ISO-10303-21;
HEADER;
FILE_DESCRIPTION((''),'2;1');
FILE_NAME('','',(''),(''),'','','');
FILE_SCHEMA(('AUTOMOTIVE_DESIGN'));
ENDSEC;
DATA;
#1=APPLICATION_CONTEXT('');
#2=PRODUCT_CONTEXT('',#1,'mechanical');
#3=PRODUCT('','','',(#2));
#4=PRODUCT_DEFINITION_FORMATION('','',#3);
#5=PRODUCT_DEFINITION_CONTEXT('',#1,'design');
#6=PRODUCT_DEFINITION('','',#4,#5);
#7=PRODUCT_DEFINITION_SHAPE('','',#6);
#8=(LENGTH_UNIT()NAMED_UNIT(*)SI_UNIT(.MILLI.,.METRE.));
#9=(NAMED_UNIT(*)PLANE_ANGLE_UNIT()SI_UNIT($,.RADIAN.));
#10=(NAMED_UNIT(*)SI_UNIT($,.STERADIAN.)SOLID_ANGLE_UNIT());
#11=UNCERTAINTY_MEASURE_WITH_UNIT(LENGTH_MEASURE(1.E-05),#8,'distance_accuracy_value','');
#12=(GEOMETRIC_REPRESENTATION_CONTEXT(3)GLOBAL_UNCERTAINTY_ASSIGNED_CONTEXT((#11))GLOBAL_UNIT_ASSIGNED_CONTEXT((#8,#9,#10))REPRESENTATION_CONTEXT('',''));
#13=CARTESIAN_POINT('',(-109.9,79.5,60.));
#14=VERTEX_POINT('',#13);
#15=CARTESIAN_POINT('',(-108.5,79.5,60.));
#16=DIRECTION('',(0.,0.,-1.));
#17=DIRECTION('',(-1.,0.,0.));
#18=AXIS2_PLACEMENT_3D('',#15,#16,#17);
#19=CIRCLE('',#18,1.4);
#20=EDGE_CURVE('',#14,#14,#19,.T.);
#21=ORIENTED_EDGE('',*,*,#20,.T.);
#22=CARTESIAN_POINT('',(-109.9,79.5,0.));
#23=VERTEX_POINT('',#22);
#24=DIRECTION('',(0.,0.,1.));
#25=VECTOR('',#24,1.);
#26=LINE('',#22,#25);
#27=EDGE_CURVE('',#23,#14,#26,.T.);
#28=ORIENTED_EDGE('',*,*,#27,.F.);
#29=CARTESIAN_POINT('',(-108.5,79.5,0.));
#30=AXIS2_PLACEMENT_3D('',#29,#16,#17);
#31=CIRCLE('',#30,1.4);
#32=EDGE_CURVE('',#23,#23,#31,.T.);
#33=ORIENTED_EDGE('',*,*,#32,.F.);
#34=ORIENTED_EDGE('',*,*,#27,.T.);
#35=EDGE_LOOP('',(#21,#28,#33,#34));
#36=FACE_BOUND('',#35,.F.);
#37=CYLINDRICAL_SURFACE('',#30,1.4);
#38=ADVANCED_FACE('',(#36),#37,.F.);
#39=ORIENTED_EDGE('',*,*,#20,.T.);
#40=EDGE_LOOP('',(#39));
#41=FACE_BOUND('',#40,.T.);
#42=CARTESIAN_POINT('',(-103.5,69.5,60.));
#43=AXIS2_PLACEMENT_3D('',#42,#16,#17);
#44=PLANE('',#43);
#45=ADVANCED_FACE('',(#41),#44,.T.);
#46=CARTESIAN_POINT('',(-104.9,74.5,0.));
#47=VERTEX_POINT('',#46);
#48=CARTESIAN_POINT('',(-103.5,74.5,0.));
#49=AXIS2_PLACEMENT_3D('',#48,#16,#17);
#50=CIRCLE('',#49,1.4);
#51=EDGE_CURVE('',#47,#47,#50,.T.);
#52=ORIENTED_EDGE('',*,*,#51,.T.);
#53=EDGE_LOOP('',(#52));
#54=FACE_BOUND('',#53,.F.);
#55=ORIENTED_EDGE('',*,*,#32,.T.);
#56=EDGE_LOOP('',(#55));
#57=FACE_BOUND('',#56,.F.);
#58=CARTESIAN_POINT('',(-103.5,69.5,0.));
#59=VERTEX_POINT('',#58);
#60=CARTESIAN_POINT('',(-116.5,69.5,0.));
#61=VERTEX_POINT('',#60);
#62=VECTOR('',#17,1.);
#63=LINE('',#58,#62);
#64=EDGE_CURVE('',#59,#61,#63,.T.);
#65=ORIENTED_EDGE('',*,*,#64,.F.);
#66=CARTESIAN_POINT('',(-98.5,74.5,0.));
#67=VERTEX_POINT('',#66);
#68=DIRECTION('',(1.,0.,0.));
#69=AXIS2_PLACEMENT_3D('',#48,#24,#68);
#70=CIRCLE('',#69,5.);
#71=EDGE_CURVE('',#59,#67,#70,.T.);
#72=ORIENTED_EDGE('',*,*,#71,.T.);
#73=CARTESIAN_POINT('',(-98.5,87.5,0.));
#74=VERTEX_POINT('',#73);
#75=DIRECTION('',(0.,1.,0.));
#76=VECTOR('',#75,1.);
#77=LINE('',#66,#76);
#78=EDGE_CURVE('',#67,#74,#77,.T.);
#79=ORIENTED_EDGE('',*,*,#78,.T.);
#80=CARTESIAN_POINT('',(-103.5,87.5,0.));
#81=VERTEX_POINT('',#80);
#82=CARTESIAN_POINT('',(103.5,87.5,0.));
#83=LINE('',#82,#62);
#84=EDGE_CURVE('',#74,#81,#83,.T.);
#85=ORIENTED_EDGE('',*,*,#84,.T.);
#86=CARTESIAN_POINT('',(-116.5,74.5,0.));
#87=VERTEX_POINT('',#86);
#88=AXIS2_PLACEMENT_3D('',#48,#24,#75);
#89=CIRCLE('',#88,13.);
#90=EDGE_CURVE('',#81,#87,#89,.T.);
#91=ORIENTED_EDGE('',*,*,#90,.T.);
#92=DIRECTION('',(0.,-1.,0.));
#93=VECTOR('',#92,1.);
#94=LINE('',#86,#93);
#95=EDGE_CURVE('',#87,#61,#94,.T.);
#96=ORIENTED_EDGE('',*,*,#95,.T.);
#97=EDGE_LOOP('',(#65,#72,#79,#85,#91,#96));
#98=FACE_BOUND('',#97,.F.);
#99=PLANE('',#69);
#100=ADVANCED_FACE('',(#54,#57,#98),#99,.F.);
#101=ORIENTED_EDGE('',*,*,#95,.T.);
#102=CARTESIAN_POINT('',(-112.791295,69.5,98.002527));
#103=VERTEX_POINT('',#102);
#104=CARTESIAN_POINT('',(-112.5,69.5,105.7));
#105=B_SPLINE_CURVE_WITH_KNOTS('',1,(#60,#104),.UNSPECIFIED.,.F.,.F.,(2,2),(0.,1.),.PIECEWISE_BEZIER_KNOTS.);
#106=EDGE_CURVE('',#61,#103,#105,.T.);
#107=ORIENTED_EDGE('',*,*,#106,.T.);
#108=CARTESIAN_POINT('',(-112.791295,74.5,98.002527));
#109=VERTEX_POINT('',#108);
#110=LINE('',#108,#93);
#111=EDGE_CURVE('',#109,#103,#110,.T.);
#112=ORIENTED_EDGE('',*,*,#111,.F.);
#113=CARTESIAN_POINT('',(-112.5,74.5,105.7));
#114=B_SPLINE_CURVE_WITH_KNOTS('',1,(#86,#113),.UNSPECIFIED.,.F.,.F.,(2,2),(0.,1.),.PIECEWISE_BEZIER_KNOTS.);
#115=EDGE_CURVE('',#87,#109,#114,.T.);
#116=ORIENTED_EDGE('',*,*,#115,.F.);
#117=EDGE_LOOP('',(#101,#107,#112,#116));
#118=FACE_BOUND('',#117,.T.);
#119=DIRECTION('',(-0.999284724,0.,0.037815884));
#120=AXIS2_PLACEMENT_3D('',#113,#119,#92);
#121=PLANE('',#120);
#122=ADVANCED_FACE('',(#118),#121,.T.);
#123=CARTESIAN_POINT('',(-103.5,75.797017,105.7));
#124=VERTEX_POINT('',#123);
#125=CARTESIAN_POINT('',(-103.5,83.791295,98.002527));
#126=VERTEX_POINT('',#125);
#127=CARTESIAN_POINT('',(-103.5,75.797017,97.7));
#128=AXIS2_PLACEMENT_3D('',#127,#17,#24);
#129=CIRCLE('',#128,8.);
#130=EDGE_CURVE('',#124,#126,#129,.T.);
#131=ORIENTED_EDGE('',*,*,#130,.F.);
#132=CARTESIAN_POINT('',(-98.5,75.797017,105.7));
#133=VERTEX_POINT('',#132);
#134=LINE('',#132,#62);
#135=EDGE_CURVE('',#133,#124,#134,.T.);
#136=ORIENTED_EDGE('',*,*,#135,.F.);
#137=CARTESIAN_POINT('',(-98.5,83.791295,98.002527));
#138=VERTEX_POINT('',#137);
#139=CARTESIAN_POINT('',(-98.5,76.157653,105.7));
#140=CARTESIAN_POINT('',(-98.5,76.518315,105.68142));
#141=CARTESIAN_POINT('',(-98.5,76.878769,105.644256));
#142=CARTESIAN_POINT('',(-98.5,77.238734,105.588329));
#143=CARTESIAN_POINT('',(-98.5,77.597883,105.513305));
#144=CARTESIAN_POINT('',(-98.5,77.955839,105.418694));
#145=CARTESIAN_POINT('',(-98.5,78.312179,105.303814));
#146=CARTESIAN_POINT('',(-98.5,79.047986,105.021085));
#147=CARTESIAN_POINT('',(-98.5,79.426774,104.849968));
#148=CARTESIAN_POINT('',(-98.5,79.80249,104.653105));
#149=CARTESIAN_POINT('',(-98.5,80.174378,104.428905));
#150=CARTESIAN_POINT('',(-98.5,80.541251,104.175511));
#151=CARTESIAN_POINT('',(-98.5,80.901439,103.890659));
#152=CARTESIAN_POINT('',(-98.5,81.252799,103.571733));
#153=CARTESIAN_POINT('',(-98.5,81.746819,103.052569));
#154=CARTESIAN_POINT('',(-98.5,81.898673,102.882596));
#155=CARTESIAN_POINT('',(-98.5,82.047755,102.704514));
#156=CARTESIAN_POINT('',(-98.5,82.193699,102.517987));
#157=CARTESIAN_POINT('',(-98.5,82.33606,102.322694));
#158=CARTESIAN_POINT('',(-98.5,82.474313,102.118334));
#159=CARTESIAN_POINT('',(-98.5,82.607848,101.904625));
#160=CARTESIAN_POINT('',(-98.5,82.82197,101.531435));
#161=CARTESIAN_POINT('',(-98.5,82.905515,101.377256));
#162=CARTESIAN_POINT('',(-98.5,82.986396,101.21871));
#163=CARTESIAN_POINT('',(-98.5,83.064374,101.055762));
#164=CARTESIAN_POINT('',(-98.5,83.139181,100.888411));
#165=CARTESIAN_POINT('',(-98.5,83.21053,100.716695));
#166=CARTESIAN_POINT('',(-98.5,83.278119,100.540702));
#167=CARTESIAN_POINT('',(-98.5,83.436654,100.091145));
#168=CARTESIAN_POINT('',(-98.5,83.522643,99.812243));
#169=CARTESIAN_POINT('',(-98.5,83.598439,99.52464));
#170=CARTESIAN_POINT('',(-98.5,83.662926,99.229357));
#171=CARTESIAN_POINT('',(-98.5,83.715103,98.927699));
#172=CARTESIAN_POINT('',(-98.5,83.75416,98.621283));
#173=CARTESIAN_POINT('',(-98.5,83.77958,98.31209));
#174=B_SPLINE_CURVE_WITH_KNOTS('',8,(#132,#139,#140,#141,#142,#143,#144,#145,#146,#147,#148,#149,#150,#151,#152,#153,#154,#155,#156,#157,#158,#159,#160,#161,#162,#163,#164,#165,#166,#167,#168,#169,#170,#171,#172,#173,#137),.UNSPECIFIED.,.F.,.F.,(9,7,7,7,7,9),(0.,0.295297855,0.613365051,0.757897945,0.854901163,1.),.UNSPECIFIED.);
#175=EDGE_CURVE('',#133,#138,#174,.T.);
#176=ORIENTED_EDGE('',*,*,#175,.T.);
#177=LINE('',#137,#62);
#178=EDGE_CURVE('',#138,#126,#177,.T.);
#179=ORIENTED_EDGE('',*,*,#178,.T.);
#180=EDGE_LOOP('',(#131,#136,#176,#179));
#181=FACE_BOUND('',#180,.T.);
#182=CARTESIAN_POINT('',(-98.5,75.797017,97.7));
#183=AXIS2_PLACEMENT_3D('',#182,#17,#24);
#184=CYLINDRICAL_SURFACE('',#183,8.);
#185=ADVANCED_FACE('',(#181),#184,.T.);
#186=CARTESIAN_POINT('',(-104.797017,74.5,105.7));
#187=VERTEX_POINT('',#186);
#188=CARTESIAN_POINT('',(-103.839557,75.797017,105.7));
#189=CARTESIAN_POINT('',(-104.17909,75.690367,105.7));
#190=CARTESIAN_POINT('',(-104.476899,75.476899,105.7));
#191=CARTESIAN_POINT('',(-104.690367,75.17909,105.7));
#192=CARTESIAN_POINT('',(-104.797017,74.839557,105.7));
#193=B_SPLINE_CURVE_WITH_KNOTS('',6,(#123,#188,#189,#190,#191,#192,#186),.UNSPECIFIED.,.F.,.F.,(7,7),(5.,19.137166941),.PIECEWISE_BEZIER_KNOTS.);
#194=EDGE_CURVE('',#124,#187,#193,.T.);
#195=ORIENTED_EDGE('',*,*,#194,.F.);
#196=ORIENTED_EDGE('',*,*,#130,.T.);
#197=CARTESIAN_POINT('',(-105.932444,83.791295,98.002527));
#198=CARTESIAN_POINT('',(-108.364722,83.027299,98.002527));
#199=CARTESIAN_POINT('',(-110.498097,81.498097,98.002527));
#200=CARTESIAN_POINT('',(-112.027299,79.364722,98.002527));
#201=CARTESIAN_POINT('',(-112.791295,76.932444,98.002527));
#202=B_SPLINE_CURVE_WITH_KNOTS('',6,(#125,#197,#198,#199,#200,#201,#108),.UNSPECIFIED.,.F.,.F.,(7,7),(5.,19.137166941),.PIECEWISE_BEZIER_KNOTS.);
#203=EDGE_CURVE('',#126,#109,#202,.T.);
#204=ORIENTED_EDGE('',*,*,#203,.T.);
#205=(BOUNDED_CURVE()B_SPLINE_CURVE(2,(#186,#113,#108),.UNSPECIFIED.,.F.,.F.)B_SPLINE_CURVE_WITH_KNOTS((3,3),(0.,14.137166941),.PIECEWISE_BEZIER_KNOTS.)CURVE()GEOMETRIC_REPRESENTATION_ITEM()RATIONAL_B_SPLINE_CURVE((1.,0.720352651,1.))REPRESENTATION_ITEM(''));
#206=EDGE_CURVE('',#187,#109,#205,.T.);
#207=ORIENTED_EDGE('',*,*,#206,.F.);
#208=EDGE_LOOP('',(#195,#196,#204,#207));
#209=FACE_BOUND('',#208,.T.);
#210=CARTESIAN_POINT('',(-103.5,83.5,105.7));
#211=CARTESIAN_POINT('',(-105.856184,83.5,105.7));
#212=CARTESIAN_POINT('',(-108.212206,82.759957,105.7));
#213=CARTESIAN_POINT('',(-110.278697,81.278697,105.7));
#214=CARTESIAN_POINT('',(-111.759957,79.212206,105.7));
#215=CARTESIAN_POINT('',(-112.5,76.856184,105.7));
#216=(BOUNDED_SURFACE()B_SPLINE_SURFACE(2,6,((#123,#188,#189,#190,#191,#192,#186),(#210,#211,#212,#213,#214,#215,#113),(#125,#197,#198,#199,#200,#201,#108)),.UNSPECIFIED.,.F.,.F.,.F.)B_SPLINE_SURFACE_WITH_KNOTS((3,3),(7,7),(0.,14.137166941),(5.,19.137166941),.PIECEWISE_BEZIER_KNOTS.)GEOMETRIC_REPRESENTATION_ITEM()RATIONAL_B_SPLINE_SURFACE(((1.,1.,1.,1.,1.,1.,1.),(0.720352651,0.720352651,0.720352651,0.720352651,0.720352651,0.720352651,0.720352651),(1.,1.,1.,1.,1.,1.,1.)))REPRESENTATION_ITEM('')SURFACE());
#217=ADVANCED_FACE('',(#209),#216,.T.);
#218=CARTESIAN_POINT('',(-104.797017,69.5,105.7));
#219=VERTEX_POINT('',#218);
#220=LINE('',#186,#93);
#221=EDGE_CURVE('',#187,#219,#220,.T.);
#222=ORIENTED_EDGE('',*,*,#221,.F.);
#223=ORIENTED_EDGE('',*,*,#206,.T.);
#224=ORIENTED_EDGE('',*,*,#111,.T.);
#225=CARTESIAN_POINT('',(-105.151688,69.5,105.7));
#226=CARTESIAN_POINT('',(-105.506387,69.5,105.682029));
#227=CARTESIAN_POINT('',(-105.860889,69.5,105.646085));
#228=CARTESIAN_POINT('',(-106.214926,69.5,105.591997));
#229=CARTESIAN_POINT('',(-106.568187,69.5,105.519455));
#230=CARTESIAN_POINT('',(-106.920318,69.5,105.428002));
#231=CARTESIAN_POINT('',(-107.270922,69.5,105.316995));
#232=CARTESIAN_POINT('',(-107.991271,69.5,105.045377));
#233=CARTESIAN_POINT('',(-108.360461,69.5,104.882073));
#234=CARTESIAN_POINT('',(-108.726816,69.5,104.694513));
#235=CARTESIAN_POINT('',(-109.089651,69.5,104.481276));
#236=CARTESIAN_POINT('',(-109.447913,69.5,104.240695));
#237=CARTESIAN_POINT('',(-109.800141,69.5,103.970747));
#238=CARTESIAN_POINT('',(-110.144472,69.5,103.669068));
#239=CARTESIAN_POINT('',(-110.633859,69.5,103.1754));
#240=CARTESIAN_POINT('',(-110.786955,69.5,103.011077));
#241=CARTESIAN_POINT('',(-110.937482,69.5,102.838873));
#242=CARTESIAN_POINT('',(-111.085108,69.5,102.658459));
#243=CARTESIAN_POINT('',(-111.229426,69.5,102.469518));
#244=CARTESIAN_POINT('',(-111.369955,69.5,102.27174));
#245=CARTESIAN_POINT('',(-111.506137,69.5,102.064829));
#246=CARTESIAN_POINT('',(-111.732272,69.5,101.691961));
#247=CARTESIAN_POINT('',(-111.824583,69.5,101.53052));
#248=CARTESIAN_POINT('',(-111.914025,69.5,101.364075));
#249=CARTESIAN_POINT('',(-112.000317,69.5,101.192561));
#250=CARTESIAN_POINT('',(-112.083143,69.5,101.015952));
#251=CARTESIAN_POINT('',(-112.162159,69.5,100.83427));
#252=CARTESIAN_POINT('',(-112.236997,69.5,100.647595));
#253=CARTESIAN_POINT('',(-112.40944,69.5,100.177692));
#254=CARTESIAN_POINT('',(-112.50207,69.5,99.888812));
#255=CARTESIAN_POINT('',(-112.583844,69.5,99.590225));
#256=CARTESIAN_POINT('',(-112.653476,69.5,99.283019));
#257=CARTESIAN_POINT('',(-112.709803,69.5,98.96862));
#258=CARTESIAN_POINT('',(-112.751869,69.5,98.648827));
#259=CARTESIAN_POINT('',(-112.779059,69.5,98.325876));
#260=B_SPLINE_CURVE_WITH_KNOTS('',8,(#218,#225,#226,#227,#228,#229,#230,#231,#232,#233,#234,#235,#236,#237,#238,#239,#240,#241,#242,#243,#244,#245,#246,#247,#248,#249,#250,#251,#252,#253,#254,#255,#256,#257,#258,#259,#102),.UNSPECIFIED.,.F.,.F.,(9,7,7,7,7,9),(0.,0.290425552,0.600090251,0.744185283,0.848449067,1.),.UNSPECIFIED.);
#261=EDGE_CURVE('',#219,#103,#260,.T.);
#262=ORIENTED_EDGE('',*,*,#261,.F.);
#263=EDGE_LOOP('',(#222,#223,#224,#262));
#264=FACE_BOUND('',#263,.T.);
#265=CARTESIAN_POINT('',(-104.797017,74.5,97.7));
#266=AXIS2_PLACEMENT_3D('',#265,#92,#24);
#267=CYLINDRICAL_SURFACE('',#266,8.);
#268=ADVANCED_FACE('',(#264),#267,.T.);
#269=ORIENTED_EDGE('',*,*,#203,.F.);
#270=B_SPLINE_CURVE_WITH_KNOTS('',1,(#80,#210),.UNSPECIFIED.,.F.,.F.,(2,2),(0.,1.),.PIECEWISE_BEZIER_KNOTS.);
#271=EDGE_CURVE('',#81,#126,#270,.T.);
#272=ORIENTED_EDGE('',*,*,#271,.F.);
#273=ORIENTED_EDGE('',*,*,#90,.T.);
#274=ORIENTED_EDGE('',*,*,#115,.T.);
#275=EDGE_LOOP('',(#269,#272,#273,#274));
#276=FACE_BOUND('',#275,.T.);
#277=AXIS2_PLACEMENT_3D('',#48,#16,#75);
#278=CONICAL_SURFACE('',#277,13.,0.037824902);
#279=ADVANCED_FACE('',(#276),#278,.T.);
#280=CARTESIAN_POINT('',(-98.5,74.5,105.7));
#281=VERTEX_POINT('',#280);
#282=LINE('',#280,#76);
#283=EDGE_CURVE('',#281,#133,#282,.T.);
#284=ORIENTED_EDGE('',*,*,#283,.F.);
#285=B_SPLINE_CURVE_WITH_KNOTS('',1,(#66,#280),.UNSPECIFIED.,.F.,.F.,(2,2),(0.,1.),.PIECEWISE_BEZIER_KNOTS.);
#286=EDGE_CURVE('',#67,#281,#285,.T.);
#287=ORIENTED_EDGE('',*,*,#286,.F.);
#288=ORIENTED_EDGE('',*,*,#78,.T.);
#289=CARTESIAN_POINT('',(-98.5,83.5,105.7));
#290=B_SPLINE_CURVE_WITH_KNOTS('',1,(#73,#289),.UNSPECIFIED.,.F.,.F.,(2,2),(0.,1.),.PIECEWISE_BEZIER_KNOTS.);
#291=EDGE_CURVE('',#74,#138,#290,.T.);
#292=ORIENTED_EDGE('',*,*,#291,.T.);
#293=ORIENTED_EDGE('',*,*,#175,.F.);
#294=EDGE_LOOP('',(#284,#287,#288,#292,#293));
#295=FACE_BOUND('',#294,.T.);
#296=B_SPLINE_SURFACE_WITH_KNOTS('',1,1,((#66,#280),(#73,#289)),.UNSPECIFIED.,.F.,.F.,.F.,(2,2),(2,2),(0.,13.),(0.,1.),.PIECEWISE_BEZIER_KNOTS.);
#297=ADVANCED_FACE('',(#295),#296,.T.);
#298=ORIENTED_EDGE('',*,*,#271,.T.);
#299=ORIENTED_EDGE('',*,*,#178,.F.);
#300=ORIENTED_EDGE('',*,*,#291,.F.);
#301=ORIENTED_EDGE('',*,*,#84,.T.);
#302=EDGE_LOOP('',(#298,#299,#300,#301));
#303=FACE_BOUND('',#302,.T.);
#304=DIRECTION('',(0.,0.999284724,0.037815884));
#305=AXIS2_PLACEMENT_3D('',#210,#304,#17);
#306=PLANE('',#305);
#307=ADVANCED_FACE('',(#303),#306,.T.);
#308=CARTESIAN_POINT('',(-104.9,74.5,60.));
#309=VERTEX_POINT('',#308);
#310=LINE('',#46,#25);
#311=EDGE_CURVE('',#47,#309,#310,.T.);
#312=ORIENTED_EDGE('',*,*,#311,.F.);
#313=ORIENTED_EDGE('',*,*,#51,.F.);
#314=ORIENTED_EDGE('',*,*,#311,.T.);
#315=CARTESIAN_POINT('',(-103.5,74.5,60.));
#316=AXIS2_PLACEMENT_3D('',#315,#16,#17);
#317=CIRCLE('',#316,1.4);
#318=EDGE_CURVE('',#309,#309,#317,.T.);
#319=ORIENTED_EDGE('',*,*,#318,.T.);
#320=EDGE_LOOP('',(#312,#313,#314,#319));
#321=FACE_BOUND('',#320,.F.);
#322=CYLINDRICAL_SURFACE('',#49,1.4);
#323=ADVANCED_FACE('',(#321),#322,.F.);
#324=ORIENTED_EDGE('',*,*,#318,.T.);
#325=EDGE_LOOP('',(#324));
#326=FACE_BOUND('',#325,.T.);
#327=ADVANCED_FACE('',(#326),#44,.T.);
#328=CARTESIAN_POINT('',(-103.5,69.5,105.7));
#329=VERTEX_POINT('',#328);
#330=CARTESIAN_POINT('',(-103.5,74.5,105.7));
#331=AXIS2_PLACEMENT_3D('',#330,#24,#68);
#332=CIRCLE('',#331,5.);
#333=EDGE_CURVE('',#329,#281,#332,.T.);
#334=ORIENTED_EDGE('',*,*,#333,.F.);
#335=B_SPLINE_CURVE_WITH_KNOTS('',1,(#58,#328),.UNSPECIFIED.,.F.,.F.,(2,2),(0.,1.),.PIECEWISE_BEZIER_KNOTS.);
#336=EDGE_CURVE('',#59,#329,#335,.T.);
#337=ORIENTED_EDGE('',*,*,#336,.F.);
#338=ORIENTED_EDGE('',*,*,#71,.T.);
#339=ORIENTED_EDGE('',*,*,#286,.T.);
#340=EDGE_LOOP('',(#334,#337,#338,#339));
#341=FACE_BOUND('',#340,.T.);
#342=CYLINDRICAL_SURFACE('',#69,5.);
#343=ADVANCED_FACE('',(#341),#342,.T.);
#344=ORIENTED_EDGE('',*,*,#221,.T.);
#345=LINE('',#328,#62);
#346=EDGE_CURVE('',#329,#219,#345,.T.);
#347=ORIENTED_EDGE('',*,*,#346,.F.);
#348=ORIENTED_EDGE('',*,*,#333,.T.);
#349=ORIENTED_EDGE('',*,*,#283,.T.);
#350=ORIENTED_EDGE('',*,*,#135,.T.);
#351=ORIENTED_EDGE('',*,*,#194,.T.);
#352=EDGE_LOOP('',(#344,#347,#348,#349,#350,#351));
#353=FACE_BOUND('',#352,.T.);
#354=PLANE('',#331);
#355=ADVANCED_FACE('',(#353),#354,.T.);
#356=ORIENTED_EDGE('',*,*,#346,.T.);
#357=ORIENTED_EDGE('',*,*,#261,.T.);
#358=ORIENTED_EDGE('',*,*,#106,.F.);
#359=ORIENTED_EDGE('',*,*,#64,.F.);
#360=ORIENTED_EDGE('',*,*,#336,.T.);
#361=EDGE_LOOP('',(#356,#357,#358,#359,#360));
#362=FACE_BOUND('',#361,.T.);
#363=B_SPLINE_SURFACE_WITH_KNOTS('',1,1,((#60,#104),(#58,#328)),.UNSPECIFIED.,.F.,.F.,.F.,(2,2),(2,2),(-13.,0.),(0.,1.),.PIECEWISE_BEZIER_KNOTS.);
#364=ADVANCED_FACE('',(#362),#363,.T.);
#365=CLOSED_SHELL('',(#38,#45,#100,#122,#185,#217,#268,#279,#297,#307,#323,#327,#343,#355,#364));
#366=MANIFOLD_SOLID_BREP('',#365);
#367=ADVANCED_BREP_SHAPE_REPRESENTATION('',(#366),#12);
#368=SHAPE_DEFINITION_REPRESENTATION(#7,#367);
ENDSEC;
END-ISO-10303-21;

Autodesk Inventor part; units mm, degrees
ref_plane "YZ Plane" through (0, 0, 0) normal (1, 0, 0) x (0, 1, 0)
ref_plane "XZ Plane" through (0, 0, 0) normal (0, 1, 0) x (-1, 0, 0)
ref_plane "XY Plane" through (0, 0, 0) normal (0, 0, 1) x (1, 0, 0)
ref_plane "Arbeitsebene1" through (0, 0, 0) normal (0, 0, 1) x (1, 0, 0)
sketch "Skizze1" plane through (0, 0, 0) normal (0, 0, 1) x (1, 0, 0)
  line L0 (76.5043, -50) -> (76.5043, 50) projected
  arc A0 (96.5043, 50) -> (76.5043, 50) centre (86.5043, 50) ccw projected
  line L1 (96.5043, 50) -> (96.5043, -50) projected
  arc A1 (76.5043, -50) -> (96.5043, -50) centre (86.5043, -50) ccw projected
  line L2 (-95.8131, -50) -> (-95.8131, 50) projected
  arc A2 (-75.8131, 50) -> (-95.8131, 50) centre (-85.8131, 50) ccw projected
  line L3 (-75.8131, 50) -> (-75.8131, -50) projected
  arc A3 (-95.8131, -50) -> (-75.8131, -50) centre (-85.8131, -50) ccw projected
  line L4 (-118.5, -74.5) -> (-118.5, 74.5) projected
  arc A4 (-118.5, -74.5) -> (-103.5, -89.5) centre (-103.5, -74.5) ccw projected
  line L5 (56.1, -89.5) -> (-103.5, -89.5) projected
  line L6 (56.1, -83) -> (56.1, -89.5) projected
  arc A5 (71.1, -68) -> (56.1, -83) centre (71.1, -83) ccw projected
  line L7 (80.5, -68) -> (71.1, -68) projected
  arc A6 (95.5, -83) -> (80.5, -68) centre (80.5, -83) ccw projected
  line L8 (95.5, -89.5) -> (95.5, -83) projected
  line L9 (103.5, -89.5) -> (95.5, -89.5) projected
  arc A7 (103.5, -89.5) -> (118.5, -74.5) centre (103.5, -74.5) ccw projected
  line L10 (118.5, 74.5) -> (118.5, -74.5) projected
  arc A8 (118.5, 74.5) -> (103.5, 89.5) centre (103.5, 74.5) ccw projected
  line L11 (-103.5, 89.5) -> (103.5, 89.5) projected
  arc A9 (-103.5, 89.5) -> (-118.5, 74.5) centre (-103.5, 74.5) ccw projected
  circle A10 centre (-58.5, 18.7) radius 1.4 projected
  circle A11 centre (-58.5, 36.552) radius 1.4 projected
  circle A12 centre (57.5, 20.252) radius 1.4 projected
  circle A13 centre (57.5, 35) radius 1.4 projected
  circle A14 centre (-58.5, 8.7) radius 1.4 projected
  circle A15 centre (-58.5, -9.152) radius 1.4 projected
  circle A16 centre (57.5, 7.148) radius 1.4 projected
  circle A17 centre (57.5, -7.6) radius 1.4 projected
  circle A18 centre (103.5, 74.5) radius 1.4 projected
  circle A19 centre (103.5, -74.5) radius 1.4 projected
  circle A20 centre (-103.5, -74.5) radius 1.4 projected
  circle A21 centre (-103.5, 74.5) radius 1.4 projected
  line L12 (20.9567, 0.5738) -> (-20.9567, 0.5738) projected
  line L13 (-20.9567, 0.5738) -> (-20.9567, 30.6837) projected
  line L14 (-20.9567, 30.6837) -> (20.9567, 30.6837) projected
  line L15 (20.9567, 30.6837) -> (20.9567, 0.5738) projected
  circle A22 centre (73.1917, -22.4328) radius 1.4 projected
  circle A23 centre (43.1917, -22.4328) radius 1.4 projected
  circle A24 centre (13.1917, -22.4328) radius 1.4 projected
  circle A25 centre (-16.8083, -22.4328) radius 1.4 projected
  circle A26 centre (-46.8083, -22.4328) radius 1.4 projected
  circle A27 centre (-102.338, -1.3) radius 1.4 projected
  circle A28 centre (-102.338, 13.7) radius 1.4 projected
  circle A29 centre (-102.338, 28.7) radius 1.4 projected
  circle A30 centre (102.338, 28.7) radius 1.4 projected
  circle A31 centre (-73.1917, -22.4328) radius 1.4 projected
  circle A32 centre (-43.1917, -22.4328) radius 1.4 projected
  circle A33 centre (-13.1917, -22.4328) radius 1.4 projected
  circle A34 centre (16.8083, -22.4328) radius 1.4 projected
  circle A35 centre (46.8083, -22.4328) radius 1.4 projected
  circle A36 centre (102.338, -1.3) radius 1.4 projected
  circle A37 centre (102.338, 13.7) radius 1.4 projected
  circle A38 centre (-103.5, 74.5) radius 5
  line L16 (-116.5, 74.5) -> (-116.5, -74.5)
  arc A39 (-116.5, -74.5) -> (-103.5, -87.5) centre (-103.5, -74.5) ccw
  line L17 (-103.5, -87.5) -> (54.1, -87.5)
  line L18 (54.1, -87.5) -> (54.1, -83)
  arc A40 (71.1, -66) -> (54.1, -83) centre (71.1, -83) ccw
  line L19 (71.1, -66) -> (80.5, -66)
  arc A41 (97.5, -83) -> (80.5, -66) centre (80.5, -83) ccw
  line L20 (97.5, -83) -> (97.5, -87.5)
  line L21 (97.5, -87.5) -> (103.5, -87.5)
  arc A42 (103.5, -87.5) -> (116.5, -74.5) centre (103.5, -74.5) ccw
  line L22 (116.5, -74.5) -> (116.5, 74.5)
  arc A43 (116.5, 74.5) -> (103.5, 87.5) centre (103.5, 74.5) ccw
  line L23 (103.5, 87.5) -> (-103.5, 87.5)
  arc A44 (-103.5, 87.5) -> (-116.5, 74.5) centre (-103.5, 74.5) ccw
  line L24 (-98.5, 74.5) -> (-98.5, 87.5)
  line L25 (-103.5, 69.5) -> (-116.5, 69.5)
  circle A45 centre (-108.5, 79.5) radius 1.4 projected
  circle A46 centre (-108.5, -79.5) radius 1.4 projected
  circle A47 centre (108.5, 79.5) radius 1.4 projected
  circle A48 centre (108.5, -79.5) radius 1.4 projected
  point P0 (0, 0)
  dimension "d0" = 10
  dimension "d1" = 2
ref_plane "Arbeitsebene2" through (0, 0, 105.7) normal (0, 0, 1) x (1, 0, 0)
sketch "Skizze4" plane through (0, 0, 105.7) normal (0, 0, 1) x (1, 0, 0)
  line L0 (-98.5, 74.5) -> (-98.5, 87.5) projected
  circle A0 centre (-103.5, 74.5) radius 5 projected
  line L1 (-103.5, 69.5) -> (-116.5, 69.5) projected
  arc A1 (-103.5, 87.5) -> (-116.5, 74.5) centre (-103.5, 74.5) ccw projected
  arc A2 (-103.5, 83.5) -> (-112.5, 74.5) centre (-103.5, 74.5) ccw
  line L2 (-103.5, 83.5) -> (-98.5, 83.5)
  line L3 (-112.5, 74.5) -> (-112.5, 69.5)
  point P0 (0, 0)
  dimension "d8" = 4
loft "Erhebung1" add profiles "Skizze1", "Skizze4" contours A21 | A38 | A38 L25 L16 A44 L23 L24 | A45 / all
sketch "Skizze5" plane through (-103.5, 69.5, 0) normal (0, 0, -1) x (-1, 0, 0)
  circle A0 centre (0, 5) radius 3.25 projected
  circle A1 centre (0, 5) radius 1.4 projected
  circle A2 centre (5, 10) radius 1.4 projected
  point P0 (-103.5, -69.5)
extrude "Extrusion4" cut sketch "Skizze5" against normal blind 60 contours A1 | A2
fillet "Rundung1" radius 8 3 edges at (-109.864, 80.864, 105.7) (-101, 83.5, 105.7) (-112.5, 72, 105.7)
properties part number "60_Planktoscope_CornerPillars"
